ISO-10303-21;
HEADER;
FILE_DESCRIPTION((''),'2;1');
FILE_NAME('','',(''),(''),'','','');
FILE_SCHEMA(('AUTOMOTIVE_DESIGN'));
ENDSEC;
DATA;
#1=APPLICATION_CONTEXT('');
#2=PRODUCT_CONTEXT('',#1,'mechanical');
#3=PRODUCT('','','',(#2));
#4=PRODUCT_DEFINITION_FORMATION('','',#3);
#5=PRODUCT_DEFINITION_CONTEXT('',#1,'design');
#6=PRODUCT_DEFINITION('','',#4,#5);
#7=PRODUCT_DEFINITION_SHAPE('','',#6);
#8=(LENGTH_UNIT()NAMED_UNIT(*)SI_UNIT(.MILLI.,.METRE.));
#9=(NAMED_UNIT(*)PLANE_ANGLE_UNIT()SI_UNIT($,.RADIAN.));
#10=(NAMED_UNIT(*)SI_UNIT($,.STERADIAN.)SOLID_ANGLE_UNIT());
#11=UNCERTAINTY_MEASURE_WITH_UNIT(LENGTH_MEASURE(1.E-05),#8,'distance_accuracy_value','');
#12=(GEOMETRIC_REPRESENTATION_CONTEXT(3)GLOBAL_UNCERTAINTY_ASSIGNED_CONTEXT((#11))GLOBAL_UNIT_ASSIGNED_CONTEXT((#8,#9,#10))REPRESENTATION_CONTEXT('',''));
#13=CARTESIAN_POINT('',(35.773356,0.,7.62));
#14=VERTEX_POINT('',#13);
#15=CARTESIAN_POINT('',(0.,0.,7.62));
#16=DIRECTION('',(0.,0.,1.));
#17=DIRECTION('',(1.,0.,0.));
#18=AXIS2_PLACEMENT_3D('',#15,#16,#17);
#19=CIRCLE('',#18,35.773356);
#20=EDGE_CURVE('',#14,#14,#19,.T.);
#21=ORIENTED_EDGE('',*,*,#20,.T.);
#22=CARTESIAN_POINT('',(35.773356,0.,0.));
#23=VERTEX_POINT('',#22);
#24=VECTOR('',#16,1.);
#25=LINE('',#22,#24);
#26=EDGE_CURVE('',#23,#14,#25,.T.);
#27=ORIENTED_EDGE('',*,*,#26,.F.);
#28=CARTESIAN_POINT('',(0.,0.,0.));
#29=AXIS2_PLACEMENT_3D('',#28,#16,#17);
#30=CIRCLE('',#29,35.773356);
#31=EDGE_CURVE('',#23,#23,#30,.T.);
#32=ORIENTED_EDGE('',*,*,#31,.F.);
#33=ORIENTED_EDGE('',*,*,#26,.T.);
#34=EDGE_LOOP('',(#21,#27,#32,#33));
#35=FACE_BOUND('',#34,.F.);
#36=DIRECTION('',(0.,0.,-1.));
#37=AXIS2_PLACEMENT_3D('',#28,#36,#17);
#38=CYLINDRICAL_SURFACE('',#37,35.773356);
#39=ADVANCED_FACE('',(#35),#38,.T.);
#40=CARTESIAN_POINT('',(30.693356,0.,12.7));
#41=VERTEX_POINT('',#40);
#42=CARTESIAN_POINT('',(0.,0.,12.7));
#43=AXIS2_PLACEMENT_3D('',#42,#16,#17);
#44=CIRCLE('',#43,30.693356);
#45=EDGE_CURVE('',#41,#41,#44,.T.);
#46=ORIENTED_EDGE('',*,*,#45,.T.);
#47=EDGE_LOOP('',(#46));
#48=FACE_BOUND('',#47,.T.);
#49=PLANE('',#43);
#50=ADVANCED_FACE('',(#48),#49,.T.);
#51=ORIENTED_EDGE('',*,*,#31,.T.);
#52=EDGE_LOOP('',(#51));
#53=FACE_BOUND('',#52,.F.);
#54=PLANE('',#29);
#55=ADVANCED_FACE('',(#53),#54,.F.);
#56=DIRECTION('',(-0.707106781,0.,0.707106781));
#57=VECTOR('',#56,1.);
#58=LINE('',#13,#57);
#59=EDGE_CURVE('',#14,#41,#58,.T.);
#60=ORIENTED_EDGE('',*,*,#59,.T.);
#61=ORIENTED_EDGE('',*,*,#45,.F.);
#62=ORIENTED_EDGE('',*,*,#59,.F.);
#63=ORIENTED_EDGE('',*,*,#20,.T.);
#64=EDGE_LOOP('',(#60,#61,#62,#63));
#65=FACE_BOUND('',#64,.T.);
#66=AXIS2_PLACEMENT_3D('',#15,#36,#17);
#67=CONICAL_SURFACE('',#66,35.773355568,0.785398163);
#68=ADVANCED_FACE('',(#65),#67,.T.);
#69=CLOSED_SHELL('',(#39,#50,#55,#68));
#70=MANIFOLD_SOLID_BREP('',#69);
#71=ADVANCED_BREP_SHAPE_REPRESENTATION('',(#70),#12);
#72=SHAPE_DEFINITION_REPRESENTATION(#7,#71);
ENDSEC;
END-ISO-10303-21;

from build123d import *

# Parameters (mm, degrees)
F0_R     = 35.7733555676
F1_DEPTH = 12.7
F2_SIZE  = 5.08


# Not quite as in the source:
# - the program builds the solid bodies; features that only make, move or delete a surface that nothing else refers to are left out


with BuildPart() as f1:
    # F0 (on Top) → F1 (new body)
    with BuildSketch(Plane.XY):
        Circle(F0_R)
    extrude(amount=F1_DEPTH)

    # F2
    f2_edges = [f1.edges().sort_by_distance(p)[0] for p in [
        (-35.773356, 0, 12.7),
    ]]
    chamfer(f2_edges, length=F2_SIZE)


solid = f1.part
